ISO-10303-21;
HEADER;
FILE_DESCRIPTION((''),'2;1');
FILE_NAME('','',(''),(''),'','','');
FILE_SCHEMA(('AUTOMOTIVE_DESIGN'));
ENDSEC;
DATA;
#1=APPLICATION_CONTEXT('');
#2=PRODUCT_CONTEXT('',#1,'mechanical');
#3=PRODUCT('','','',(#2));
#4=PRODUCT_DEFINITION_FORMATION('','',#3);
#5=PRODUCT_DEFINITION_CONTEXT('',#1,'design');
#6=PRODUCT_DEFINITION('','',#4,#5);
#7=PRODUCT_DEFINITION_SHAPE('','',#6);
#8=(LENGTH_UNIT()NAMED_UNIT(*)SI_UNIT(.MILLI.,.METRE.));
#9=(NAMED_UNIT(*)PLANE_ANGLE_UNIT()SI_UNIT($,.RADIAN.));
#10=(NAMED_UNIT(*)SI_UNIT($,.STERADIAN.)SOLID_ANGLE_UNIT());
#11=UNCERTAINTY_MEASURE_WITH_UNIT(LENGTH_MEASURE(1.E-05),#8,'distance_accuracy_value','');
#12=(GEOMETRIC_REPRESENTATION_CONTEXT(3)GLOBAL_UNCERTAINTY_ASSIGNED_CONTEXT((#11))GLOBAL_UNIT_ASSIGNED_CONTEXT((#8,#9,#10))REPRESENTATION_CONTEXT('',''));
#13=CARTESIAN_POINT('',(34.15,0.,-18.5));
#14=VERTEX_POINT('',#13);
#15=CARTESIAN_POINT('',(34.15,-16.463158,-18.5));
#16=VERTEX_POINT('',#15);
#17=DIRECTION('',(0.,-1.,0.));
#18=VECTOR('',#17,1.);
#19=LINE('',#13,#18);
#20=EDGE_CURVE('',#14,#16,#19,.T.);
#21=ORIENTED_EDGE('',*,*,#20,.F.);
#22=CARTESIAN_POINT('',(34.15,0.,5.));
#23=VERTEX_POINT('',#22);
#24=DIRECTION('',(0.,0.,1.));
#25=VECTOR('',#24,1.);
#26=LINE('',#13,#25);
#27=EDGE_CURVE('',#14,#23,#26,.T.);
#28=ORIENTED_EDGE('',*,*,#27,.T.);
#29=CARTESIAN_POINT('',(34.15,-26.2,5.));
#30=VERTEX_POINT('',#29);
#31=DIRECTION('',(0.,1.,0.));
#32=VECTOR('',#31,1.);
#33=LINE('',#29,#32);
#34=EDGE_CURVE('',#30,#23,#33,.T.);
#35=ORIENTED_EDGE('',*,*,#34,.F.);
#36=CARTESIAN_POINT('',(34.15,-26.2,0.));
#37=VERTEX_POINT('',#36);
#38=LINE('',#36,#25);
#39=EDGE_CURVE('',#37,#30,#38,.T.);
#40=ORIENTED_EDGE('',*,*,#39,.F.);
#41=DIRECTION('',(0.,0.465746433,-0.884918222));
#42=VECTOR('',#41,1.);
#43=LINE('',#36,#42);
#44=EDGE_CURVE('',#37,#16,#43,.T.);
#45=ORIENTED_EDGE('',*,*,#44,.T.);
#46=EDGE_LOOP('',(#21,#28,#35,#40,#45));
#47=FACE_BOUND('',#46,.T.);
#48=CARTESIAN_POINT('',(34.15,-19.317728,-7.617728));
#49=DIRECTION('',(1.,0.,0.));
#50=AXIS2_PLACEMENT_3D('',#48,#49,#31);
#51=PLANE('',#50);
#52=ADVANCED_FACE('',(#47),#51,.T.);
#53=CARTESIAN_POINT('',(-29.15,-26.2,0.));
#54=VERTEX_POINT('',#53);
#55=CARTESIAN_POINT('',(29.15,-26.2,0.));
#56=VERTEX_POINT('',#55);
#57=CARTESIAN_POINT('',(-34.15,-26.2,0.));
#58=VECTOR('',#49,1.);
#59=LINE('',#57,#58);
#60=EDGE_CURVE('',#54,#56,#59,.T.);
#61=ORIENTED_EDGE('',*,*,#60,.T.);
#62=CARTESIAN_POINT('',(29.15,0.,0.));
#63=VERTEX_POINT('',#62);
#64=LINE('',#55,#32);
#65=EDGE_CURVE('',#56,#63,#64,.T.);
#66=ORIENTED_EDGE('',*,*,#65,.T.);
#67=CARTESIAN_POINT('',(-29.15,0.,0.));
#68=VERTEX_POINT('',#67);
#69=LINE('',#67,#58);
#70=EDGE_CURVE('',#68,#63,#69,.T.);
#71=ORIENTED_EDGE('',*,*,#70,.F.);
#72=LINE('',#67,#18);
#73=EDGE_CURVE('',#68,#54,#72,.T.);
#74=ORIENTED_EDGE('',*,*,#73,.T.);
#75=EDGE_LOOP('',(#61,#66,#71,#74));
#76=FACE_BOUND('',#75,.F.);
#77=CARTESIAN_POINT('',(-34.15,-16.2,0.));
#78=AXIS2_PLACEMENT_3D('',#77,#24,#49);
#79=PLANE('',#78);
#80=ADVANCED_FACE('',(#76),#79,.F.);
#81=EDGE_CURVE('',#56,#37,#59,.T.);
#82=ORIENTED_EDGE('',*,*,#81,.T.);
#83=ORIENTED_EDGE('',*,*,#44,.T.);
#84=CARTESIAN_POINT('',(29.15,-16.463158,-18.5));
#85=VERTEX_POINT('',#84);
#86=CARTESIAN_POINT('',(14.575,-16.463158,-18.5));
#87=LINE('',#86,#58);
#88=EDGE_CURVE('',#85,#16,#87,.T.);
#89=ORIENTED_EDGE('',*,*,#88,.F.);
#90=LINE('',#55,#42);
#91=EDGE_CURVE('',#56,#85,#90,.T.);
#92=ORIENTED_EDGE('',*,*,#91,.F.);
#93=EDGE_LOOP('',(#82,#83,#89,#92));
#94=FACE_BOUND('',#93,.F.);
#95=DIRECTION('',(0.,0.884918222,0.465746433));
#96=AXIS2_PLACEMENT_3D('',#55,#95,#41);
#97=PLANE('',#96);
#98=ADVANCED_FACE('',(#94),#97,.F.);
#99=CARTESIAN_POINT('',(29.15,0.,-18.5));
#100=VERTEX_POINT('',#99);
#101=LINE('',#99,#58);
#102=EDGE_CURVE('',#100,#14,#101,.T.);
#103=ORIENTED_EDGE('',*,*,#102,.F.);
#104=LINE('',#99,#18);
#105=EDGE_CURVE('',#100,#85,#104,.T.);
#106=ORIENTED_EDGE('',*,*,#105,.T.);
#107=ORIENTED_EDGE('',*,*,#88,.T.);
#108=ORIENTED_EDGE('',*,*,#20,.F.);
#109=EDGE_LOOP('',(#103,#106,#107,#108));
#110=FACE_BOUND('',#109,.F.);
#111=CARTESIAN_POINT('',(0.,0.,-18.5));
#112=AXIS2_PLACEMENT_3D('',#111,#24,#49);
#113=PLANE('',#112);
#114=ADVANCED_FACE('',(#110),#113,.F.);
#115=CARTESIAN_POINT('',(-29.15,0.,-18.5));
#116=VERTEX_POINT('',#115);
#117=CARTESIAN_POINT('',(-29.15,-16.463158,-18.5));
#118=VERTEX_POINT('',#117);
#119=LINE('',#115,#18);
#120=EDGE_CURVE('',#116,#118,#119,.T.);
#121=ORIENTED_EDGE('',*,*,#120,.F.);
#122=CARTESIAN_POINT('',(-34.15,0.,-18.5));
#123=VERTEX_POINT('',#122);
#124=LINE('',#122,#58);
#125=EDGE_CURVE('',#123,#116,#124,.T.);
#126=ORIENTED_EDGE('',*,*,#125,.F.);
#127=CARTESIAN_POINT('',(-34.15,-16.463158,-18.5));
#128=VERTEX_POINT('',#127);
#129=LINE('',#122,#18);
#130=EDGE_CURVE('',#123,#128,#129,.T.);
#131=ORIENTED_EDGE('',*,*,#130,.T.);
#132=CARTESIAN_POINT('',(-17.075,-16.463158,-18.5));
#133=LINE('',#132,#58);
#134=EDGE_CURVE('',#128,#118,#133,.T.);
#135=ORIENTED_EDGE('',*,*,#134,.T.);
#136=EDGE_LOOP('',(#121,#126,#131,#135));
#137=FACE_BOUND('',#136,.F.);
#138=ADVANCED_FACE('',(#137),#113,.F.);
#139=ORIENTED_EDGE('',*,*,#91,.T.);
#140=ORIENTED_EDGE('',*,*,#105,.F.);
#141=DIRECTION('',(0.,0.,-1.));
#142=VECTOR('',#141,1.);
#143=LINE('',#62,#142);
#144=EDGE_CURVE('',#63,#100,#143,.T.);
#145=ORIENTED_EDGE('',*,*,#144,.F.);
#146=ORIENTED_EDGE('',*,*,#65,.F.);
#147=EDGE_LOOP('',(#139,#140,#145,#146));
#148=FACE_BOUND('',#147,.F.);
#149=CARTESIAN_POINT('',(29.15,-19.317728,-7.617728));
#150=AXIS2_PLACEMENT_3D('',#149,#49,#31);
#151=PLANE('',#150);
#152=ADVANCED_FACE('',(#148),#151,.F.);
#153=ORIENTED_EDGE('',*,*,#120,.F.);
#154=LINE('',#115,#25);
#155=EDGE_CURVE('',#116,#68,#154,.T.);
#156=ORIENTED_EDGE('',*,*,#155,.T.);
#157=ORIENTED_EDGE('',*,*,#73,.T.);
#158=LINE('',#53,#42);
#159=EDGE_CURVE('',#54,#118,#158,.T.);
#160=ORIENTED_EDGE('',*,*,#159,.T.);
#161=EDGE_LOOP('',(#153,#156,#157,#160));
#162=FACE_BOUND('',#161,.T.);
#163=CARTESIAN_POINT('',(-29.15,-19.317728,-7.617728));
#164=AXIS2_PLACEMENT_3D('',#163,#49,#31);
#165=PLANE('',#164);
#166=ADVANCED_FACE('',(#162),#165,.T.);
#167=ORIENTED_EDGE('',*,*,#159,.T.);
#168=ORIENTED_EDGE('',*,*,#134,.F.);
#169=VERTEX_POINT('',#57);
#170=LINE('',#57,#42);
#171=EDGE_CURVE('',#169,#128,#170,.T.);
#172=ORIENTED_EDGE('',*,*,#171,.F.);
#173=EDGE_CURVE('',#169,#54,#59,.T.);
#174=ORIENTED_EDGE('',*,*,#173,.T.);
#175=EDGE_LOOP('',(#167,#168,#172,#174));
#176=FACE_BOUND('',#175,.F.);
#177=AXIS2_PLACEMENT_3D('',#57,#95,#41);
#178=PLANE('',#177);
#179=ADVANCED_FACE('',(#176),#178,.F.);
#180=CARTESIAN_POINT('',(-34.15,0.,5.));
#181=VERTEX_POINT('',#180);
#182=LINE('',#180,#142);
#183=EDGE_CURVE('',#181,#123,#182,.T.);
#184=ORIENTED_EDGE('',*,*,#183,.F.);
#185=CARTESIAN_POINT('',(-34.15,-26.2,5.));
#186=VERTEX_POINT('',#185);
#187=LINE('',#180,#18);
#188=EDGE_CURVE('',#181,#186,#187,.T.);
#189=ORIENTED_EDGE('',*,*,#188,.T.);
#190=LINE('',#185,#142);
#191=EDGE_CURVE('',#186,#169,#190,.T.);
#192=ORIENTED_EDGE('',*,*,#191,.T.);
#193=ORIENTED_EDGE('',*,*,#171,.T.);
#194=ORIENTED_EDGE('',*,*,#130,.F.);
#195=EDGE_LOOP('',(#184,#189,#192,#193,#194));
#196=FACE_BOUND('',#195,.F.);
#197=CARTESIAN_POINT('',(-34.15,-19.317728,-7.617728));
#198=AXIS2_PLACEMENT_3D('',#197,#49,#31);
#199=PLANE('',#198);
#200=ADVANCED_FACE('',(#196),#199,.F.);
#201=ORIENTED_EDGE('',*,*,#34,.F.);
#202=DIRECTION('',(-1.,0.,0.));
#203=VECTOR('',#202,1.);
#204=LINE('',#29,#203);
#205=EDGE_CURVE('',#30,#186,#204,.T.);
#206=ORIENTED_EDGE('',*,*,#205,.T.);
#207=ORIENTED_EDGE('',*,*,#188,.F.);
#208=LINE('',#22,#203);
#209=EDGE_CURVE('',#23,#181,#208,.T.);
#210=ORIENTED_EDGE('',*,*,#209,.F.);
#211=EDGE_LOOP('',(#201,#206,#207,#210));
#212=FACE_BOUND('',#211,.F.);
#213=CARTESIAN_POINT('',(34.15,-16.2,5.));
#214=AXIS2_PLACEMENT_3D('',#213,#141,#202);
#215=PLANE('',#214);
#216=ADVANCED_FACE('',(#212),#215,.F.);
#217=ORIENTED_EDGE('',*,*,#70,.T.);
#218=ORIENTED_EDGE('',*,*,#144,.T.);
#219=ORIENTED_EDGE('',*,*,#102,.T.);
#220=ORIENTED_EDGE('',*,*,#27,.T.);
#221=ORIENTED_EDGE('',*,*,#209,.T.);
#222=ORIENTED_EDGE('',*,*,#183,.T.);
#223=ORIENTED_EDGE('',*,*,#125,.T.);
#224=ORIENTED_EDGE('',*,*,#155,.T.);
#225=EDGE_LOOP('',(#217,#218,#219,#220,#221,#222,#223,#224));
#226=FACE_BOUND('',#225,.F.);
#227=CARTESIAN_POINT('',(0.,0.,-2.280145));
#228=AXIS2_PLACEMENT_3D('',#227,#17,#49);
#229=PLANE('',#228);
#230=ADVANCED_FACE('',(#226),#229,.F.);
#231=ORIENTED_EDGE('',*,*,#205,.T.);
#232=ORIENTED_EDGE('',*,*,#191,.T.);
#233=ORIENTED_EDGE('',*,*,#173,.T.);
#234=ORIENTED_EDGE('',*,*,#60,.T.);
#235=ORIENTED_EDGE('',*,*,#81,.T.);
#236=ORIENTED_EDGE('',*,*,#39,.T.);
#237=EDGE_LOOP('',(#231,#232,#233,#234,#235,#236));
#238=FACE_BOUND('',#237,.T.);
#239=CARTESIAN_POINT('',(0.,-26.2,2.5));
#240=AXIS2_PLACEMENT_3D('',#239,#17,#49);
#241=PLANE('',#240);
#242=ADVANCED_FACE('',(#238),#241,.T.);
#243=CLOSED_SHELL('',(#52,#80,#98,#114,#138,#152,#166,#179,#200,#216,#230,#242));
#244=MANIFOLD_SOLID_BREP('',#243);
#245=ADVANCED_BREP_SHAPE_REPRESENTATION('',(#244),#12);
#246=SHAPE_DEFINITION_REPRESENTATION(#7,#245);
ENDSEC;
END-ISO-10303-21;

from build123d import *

# Parameters (mm, degrees)
F1_DEPTH     = 16.2
F3_DEPTH     = 10
F4_T4_DEPTH  = 5
F4_T10_DEPTH = 5


# Not quite as in the source:
# - a fillet or chamfer that OpenCascade refuses, or shapes differently, is made with other operations: its cross-section is extruded or revolved along the edge and cut away or added


with BuildPart() as f1:
    # F0 (on Front) → F1 (new body)
    with BuildSketch(Plane.XZ):
        Polygon((-29.15, 0), (0, 0), (29.15, 0), (29.15, -18.5), (34.15, -18.5), (34.15, 5), (0, 5), (-34.15, 5), (-34.15, -18.5), (-29.15, -18.5), align=None)
    extrude(amount=F1_DEPTH)

    # F2 (on face) → F3 (join)
    with BuildSketch(Plane.XZ.offset(16.2)):
        Polygon((34.15, 5), (-34.15, 5), (-34.15, 0), (-29.15, 0), (29.15, 0), (34.15, 0), align=None)
    extrude(amount=F3_DEPTH)

    # F4: chamfer of 10 x 19 on 2 edges, made by hand


with BuildPart() as f4_tool2:
    # F4_s3 → F4_t4 (new body)
    with BuildSketch(Plane.YZ.offset(29.15)):
        Polygon((-26.2, 0), (-16.2, -19), (-16.2, 0), align=None)
    extrude(amount=F4_T4_DEPTH)

    split(bisect_by=Plane.XZ.offset(26.2), keep=Keep.BOTTOM)

    split(bisect_by=Plane.XY.offset(-18.5), keep=Keep.TOP)


with BuildPart() as f1_1:
    add(f1.part)

    # F4_t1: union F4_tool2
    add(f4_tool2.part)


with BuildPart() as f4_tool8:
    # F4_s9 → F4_t10 (new body)
    with BuildSketch(Plane.YZ.offset(-34.15)):
        Polygon((-26.2, 0), (-16.2, -19), (-16.2, 0), align=None)
    extrude(amount=F4_T10_DEPTH)

    split(bisect_by=Plane.XZ.offset(26.2), keep=Keep.BOTTOM)

    split(bisect_by=Plane.XY.offset(-18.5), keep=Keep.TOP)


with BuildPart() as f1_2:
    add(f1_1.part)

    # F4_t7: union F4_tool8
    add(f4_tool8.part)


solid = f1_2.part
